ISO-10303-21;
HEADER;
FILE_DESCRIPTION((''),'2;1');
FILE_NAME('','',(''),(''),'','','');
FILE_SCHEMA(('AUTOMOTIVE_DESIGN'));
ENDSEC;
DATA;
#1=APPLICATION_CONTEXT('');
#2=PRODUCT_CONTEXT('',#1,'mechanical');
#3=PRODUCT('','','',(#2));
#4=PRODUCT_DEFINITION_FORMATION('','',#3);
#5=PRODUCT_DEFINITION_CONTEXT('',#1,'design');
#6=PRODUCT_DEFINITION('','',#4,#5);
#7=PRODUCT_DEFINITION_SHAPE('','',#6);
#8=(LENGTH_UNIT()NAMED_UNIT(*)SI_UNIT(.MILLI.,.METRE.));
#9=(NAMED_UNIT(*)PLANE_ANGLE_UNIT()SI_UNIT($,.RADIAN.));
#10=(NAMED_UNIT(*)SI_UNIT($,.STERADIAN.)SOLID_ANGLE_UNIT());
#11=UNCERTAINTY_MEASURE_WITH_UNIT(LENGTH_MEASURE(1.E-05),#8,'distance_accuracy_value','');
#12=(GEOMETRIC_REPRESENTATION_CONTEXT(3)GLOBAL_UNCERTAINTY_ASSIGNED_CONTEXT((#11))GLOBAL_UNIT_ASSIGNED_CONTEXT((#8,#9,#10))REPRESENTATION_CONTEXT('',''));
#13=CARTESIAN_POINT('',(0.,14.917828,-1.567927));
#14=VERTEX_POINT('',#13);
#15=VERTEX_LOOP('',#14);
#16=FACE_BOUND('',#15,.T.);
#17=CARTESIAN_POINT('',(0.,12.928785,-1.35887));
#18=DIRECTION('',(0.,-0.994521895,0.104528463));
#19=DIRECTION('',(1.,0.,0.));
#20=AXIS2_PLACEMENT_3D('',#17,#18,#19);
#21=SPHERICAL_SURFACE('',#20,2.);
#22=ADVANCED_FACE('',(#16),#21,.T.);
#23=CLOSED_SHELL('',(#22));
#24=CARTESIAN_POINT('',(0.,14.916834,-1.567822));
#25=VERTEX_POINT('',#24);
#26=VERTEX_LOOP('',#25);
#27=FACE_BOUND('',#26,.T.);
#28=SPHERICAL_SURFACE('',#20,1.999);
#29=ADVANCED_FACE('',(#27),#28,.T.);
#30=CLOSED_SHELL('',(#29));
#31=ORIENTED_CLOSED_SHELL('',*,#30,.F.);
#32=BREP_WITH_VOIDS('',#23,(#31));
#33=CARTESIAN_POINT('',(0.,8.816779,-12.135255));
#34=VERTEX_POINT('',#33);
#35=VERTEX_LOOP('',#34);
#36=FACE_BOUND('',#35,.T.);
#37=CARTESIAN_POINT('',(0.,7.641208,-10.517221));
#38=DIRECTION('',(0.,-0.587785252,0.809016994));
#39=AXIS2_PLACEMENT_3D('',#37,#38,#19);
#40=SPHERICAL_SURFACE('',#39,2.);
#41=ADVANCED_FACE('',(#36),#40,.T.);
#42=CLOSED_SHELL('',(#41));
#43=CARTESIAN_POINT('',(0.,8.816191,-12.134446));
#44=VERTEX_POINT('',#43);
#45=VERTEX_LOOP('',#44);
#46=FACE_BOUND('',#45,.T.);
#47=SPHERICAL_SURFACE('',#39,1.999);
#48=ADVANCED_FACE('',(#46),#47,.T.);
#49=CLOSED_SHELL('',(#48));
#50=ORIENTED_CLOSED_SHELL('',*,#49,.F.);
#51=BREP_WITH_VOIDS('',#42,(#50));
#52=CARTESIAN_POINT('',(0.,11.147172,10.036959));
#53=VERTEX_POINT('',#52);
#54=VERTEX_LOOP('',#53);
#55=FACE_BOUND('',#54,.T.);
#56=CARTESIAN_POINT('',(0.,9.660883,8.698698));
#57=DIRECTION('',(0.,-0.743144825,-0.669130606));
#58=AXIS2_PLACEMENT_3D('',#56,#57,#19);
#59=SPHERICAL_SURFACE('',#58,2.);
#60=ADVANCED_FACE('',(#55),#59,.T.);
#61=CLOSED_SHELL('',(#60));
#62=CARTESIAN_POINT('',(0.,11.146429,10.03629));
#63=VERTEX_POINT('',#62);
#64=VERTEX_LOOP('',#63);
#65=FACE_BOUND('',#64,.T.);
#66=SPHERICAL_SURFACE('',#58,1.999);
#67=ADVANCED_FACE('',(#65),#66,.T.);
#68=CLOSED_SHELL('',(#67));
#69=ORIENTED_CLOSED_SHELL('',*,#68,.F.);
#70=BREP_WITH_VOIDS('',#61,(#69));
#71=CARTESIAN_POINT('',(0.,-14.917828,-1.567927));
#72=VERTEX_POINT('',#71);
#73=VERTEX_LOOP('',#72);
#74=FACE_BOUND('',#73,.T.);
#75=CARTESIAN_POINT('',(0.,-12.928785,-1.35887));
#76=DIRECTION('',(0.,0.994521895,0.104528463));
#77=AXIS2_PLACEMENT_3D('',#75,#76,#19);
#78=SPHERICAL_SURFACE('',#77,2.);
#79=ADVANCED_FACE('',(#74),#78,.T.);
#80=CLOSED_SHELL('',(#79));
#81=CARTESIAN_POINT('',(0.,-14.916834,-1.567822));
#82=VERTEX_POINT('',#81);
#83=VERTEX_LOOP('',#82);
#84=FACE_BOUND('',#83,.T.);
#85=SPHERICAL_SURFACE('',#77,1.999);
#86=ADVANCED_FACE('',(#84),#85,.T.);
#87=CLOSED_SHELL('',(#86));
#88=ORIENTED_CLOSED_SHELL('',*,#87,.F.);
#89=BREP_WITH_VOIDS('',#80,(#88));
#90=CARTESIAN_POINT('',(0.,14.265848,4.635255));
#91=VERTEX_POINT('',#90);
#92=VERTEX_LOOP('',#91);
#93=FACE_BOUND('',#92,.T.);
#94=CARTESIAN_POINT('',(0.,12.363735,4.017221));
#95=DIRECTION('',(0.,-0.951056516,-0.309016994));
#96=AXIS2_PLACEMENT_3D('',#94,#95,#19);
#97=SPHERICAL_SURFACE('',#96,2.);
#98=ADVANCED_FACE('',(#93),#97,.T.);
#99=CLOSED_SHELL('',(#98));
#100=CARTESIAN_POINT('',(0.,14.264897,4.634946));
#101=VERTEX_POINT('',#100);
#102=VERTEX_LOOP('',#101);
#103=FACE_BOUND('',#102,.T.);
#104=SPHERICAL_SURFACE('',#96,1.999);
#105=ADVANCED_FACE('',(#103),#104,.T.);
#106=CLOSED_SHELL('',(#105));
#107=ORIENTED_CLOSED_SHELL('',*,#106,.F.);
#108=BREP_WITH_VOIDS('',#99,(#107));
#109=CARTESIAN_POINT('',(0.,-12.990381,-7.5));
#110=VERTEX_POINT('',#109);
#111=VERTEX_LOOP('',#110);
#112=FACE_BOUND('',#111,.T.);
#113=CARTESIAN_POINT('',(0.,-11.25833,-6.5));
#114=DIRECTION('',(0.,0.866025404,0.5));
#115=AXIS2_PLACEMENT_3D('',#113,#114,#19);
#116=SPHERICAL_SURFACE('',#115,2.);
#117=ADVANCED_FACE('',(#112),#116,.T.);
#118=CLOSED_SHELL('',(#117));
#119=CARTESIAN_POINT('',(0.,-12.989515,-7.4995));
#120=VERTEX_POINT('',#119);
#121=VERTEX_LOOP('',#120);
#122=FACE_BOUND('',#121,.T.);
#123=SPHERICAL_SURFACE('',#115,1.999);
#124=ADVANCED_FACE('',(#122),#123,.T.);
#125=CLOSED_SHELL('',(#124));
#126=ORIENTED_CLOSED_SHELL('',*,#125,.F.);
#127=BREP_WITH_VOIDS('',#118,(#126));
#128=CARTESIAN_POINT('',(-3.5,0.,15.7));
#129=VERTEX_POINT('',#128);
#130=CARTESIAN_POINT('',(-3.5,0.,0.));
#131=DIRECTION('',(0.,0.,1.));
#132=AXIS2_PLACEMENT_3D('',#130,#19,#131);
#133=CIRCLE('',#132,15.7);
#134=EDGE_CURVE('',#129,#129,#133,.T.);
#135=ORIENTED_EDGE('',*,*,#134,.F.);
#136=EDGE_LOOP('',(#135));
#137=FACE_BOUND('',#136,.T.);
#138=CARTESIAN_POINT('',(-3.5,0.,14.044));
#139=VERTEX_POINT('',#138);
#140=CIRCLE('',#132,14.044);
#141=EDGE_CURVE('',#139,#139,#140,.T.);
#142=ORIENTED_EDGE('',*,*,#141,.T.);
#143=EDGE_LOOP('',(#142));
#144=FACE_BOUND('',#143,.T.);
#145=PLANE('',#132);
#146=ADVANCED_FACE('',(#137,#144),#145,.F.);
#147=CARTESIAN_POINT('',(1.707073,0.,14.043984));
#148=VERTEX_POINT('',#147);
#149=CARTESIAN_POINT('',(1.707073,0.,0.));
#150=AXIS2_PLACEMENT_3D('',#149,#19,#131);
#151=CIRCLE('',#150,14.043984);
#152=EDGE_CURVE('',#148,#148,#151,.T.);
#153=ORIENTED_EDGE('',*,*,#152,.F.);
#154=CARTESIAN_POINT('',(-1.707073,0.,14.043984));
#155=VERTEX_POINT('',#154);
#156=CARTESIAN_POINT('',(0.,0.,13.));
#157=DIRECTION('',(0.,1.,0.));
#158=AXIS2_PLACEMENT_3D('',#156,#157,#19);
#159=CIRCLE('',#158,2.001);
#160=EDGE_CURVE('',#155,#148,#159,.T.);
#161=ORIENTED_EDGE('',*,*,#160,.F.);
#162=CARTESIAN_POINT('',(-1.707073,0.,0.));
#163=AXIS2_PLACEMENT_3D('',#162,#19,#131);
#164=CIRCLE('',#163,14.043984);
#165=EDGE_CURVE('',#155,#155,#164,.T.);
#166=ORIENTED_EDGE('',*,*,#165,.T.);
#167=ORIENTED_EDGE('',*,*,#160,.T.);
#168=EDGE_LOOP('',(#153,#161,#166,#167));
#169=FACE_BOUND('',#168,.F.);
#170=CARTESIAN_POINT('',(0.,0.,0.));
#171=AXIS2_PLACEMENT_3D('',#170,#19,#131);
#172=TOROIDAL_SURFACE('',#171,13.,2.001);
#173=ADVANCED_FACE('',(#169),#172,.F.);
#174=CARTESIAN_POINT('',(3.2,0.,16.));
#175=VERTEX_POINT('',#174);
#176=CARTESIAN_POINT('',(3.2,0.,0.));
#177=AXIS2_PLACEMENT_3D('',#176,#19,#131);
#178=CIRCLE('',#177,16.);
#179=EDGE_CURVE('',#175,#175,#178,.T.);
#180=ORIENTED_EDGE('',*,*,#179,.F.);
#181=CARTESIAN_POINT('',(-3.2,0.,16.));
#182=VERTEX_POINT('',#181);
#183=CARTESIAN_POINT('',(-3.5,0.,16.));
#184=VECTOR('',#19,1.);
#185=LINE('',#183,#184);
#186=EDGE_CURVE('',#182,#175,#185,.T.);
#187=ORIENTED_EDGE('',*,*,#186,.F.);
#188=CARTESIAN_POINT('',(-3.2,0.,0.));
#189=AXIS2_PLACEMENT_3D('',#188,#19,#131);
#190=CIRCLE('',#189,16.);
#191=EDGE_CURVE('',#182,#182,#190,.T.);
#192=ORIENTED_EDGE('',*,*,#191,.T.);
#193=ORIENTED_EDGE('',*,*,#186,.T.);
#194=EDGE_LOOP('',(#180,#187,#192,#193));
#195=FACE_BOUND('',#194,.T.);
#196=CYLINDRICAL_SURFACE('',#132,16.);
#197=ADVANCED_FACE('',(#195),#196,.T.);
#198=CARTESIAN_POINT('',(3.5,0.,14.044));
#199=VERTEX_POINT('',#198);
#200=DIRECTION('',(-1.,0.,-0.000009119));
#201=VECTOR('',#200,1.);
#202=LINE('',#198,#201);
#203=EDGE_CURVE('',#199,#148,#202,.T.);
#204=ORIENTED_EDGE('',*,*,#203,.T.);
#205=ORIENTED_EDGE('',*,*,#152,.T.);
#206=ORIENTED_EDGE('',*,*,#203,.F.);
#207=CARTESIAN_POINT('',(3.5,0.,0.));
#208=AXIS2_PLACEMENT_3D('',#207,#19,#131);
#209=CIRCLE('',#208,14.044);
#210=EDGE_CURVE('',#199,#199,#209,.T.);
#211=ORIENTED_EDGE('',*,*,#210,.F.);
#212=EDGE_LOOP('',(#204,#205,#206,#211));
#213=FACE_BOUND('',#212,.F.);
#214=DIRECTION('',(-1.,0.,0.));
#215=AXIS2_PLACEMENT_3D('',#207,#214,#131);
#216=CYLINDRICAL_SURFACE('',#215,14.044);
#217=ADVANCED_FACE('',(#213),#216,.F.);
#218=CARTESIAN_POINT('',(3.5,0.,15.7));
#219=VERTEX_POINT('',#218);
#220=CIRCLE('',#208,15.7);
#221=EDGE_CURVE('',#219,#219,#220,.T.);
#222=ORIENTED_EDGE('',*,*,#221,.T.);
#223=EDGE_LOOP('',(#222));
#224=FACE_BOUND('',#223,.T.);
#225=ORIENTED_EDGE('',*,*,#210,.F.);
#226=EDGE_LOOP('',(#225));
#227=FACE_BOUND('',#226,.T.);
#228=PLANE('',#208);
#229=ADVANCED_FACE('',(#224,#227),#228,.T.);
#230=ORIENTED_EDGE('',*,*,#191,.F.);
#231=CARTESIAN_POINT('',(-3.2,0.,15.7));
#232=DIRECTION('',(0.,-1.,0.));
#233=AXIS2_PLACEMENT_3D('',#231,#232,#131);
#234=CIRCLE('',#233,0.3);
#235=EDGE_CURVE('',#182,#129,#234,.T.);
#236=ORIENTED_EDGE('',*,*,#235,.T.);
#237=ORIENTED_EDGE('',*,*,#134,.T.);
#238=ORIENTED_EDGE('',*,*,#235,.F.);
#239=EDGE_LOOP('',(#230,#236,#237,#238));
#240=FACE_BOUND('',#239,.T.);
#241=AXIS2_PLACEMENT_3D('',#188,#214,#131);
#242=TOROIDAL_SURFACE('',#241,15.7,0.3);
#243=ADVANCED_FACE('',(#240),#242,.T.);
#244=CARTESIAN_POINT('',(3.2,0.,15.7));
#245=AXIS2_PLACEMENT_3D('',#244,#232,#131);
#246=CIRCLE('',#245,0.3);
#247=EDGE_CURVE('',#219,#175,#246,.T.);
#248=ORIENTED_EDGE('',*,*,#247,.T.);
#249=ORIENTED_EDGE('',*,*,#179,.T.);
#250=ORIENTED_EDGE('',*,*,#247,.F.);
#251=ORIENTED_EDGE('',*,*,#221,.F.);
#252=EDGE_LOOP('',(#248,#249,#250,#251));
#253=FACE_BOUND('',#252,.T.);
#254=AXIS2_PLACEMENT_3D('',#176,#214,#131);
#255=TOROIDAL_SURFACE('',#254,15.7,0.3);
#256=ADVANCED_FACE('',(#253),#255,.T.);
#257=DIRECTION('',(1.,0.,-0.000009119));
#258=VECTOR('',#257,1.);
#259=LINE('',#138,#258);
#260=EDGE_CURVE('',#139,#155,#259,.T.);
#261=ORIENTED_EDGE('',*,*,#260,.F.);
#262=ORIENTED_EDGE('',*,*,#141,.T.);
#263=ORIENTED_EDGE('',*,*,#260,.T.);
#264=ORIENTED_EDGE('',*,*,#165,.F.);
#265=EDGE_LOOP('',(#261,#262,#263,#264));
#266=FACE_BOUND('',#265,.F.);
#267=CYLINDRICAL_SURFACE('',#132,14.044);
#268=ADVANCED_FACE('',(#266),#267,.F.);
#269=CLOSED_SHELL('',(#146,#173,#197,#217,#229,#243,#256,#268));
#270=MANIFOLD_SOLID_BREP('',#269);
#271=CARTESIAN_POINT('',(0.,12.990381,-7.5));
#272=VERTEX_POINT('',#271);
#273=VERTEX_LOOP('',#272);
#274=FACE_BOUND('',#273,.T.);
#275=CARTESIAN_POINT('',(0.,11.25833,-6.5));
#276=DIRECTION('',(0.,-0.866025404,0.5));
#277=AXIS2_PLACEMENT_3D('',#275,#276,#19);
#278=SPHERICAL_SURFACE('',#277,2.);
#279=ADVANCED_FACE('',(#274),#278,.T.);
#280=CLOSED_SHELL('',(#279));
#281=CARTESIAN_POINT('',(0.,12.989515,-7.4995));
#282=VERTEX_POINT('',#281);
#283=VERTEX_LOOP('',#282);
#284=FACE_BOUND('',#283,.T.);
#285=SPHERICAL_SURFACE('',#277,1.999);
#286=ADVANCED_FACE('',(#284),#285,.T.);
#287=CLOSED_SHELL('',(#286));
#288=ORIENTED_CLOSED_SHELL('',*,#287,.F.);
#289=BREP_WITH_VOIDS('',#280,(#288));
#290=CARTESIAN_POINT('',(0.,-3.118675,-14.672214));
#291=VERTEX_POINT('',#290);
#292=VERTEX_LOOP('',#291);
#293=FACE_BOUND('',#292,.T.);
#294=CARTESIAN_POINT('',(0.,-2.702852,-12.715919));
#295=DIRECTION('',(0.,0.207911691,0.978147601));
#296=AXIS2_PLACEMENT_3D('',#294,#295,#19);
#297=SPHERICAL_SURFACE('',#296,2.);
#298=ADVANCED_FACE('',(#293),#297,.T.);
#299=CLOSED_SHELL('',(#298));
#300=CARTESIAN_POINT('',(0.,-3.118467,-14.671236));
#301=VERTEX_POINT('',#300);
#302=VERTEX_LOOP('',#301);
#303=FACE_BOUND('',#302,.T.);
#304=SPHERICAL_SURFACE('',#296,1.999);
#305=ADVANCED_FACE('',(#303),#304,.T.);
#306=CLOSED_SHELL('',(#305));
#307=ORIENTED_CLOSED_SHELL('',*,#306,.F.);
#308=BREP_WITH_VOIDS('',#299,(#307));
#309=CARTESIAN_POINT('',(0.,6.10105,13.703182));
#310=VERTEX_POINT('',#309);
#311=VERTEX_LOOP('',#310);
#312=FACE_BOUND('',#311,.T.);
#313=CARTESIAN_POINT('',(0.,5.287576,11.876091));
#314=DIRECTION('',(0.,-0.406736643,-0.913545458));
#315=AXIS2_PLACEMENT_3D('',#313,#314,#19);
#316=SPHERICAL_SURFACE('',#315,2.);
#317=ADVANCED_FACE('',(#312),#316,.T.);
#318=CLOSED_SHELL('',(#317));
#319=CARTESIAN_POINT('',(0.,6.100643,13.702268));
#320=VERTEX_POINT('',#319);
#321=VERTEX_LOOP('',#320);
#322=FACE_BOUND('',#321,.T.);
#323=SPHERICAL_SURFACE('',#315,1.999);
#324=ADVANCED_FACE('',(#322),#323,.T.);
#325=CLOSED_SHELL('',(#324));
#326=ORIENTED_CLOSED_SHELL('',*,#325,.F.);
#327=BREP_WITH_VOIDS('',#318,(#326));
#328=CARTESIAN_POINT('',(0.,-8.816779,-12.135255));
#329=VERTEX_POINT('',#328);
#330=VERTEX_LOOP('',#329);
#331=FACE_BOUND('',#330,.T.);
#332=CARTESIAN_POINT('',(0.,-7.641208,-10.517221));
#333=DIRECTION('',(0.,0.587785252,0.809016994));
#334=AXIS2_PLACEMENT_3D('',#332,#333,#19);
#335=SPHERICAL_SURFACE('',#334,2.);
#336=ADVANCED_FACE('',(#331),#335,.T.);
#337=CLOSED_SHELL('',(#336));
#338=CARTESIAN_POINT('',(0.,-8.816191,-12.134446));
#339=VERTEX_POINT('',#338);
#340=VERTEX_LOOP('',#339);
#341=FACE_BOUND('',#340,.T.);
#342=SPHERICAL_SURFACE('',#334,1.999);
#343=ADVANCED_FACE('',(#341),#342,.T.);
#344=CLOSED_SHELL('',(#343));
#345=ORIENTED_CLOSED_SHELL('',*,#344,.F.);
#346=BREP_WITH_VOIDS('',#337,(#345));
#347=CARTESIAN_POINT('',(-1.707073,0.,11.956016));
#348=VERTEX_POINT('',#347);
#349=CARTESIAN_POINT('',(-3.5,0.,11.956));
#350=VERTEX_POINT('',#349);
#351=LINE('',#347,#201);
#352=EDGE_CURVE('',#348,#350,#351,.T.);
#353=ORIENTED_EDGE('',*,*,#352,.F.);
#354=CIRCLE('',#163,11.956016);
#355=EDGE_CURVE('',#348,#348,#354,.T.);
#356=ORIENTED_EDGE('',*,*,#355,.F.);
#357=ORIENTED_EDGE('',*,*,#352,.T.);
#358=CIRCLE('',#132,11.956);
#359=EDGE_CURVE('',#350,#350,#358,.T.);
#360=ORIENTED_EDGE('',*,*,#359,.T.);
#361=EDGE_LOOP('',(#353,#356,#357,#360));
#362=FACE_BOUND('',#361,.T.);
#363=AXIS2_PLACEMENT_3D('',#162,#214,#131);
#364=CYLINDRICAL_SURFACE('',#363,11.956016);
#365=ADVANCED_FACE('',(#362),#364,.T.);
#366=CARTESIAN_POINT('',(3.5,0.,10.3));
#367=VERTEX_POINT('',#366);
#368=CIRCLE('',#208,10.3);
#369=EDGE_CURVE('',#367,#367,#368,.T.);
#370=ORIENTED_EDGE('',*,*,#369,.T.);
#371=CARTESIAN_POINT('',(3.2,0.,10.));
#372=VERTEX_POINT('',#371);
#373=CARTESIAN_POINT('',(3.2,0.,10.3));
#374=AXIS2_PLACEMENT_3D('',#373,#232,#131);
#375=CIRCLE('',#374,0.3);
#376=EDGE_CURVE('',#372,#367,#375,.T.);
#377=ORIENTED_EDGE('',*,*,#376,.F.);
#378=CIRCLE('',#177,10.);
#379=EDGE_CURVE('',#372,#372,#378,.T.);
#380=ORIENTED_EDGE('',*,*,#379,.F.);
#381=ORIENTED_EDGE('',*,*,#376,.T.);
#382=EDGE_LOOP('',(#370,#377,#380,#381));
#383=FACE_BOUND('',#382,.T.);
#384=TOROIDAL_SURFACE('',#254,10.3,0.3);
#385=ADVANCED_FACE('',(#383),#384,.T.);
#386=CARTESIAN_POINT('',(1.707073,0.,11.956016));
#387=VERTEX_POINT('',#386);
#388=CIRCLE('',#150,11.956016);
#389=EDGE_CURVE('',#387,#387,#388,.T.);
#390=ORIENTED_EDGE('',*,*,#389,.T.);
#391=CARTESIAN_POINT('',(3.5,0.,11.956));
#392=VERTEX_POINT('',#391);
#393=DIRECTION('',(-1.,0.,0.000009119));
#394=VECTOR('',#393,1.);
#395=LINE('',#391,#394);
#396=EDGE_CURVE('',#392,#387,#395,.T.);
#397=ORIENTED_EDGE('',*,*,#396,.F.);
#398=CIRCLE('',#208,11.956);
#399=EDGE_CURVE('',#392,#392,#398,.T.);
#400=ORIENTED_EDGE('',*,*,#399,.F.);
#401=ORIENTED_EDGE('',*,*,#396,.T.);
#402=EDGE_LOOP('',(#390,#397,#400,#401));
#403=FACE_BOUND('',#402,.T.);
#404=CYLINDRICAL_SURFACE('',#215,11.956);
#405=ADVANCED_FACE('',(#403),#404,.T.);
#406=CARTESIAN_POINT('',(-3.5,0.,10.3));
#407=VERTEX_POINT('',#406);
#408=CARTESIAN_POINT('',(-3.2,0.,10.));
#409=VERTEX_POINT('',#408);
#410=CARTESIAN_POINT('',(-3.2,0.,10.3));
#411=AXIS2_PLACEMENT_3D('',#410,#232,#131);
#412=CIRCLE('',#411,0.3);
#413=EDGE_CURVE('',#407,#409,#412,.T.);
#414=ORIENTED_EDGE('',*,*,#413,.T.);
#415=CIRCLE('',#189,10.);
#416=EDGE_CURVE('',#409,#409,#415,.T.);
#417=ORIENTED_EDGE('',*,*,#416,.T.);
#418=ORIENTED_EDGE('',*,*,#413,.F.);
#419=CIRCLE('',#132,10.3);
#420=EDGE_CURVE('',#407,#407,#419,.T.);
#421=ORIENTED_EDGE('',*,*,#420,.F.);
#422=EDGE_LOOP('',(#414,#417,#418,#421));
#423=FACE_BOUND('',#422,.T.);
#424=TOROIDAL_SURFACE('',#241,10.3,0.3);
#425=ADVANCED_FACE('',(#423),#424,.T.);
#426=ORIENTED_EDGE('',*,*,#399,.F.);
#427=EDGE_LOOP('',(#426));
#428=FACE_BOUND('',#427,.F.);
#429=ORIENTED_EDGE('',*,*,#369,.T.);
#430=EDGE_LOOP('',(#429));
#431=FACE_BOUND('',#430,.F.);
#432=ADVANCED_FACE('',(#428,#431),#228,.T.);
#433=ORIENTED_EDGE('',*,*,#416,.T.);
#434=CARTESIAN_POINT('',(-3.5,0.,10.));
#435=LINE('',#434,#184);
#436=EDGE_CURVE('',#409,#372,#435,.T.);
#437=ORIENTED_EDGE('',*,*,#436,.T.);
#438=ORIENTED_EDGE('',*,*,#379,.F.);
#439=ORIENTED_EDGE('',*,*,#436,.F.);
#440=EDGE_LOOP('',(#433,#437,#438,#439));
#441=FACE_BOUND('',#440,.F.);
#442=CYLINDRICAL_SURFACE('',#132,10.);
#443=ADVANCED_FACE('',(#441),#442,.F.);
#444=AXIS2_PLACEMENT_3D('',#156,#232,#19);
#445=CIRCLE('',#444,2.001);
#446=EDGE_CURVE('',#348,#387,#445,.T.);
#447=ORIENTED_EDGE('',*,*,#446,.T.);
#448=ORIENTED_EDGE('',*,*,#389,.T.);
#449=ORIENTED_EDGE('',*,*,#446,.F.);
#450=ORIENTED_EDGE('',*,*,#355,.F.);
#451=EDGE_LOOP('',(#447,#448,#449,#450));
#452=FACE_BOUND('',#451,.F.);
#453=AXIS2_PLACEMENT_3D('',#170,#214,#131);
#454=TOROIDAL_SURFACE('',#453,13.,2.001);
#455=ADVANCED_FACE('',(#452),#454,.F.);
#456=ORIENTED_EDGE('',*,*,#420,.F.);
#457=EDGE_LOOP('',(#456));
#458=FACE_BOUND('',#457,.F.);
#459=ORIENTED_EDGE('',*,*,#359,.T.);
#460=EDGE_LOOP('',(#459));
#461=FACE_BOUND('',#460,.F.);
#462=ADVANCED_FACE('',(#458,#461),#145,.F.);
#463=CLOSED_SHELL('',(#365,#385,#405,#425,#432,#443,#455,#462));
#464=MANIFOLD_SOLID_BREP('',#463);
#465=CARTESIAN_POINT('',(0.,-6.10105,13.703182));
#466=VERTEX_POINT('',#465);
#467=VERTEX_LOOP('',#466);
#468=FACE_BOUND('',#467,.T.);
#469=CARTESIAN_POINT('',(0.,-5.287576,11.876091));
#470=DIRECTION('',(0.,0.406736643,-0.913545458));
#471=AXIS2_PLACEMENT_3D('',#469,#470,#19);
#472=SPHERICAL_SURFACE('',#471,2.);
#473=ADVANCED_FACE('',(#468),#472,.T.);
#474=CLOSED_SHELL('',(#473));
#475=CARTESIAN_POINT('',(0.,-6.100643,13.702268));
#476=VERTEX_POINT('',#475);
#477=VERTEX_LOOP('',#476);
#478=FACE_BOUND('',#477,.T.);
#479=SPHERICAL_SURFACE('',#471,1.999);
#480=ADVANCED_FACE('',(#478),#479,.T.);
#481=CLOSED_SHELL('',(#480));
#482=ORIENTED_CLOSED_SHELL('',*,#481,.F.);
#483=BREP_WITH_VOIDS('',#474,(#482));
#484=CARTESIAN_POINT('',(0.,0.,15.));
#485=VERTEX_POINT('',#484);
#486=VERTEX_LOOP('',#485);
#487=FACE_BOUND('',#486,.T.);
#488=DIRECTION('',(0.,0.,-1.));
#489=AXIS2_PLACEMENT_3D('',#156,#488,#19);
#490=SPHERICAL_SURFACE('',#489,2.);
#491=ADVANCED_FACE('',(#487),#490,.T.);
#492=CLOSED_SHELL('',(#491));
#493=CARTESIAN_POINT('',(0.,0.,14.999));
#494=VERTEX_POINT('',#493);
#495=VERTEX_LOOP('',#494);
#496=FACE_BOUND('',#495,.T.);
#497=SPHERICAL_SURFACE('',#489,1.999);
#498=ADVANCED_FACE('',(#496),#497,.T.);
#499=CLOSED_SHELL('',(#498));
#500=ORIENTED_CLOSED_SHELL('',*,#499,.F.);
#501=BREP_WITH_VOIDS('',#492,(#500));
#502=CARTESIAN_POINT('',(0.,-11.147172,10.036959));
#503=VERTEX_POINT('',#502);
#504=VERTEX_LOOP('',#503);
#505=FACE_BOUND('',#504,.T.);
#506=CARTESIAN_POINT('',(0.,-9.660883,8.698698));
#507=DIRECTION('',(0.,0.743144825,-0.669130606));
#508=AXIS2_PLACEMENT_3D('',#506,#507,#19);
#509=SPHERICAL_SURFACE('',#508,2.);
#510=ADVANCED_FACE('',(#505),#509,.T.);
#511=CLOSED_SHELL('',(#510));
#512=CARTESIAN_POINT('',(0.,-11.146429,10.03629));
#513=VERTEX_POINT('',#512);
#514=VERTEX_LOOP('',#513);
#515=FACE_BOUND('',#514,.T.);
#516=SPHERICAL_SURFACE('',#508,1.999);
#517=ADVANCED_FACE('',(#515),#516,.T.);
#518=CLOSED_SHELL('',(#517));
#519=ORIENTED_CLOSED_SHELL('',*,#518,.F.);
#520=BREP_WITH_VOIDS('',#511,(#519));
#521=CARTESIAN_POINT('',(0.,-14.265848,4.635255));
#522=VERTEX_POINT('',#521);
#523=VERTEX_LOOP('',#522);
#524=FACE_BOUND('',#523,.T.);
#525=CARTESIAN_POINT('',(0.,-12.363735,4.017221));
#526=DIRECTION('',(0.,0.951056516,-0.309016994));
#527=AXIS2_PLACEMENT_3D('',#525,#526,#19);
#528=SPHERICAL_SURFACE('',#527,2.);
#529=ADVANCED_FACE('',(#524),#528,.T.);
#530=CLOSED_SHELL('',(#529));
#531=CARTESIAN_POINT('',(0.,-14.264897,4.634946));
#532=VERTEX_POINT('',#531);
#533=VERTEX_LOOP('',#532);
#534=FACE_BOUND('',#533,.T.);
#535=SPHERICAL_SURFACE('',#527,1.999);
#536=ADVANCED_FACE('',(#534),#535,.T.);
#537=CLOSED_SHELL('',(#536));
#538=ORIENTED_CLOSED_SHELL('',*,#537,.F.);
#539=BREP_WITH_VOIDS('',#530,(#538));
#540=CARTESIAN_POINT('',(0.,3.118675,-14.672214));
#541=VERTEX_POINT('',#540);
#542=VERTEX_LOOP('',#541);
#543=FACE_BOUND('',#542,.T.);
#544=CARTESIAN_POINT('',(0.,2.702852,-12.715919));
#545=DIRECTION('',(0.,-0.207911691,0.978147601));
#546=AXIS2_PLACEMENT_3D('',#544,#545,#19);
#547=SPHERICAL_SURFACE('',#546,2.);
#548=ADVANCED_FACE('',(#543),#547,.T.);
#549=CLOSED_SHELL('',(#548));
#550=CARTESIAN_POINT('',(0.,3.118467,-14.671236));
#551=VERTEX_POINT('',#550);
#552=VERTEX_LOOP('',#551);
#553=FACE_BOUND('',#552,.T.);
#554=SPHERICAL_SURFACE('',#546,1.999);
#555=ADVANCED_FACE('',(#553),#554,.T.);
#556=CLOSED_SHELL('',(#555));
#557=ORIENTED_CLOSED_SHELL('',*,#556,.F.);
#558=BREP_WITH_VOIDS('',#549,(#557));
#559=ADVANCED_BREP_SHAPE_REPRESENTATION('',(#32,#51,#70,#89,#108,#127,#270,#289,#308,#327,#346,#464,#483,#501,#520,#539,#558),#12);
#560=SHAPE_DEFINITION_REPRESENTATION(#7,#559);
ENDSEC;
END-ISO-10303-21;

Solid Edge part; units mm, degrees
sketch "Sketch1" plane through (0, 0, 0) normal (0, -1, 0) x (1, 0, 0)
  arc A0 (0, 15) -> (0, 11) centre (0, 13) cw
  dimension "D1" = 2
revolve "RevolvedProtrusion1" add sketch "Sketch1" angle 360 about axis through (0, 0, 30.6346) along (0, 0, 1)
shell "Thinwall1" thickness 0.001 removed faces 0
pattern_circular "Pattern1" count 15 over 360 about axis through (0, 0, 0) along (1, 0, 0) of "RevolvedProtrusion1", "Thinwall1"
sketch "Sketch2" plane through (0, 0, 0) normal (0, -1, 0) x (1, 0, 0)
  line L0 (-3.5, 11.956) -> (-3.5, 10)
  line L1 (-3.5, 10) -> (3.5, 10)
  line L2 (3.5, 10) -> (3.5, 11.956)
  line L3 (3.5, 11.956) -> (1.7071, 11.956)
  arc A0 (-1.7071, 11.956) -> (1.7071, 11.956) centre (0, 13) ccw
  line L4 (-1.7071, 11.956) -> (-3.5, 11.956)
  line L5 (-3.5, 14.044) -> (-1.7071, 14.044)
  arc A1 (-1.7071, 14.044) -> (1.7071, 14.044) centre (0, 13) cw
  line L6 (3.5, 14.044) -> (1.7071, 14.044)
  line L7 (3.5, 16) -> (3.5, 14.044)
  line L8 (-3.5, 16) -> (3.5, 16)
  line L9 (-3.5, 14.044) -> (-3.5, 16)
  dimension "D1" = 7
  dimension "D2" = 2.001
  dimension "D3" = 2.001
revolve "RevolvedProtrusion2" add sketch "Sketch2" angle 360 about axis through (-60, 0, 0) along (1, 0, 0)
fillet "Round1" radius 0.3 4 edges at (-3.5, 0, -16) (3.5, 0, -16) (3.5, 0, -10) (-3.5, 0, -10)
properties material "Stahl"
